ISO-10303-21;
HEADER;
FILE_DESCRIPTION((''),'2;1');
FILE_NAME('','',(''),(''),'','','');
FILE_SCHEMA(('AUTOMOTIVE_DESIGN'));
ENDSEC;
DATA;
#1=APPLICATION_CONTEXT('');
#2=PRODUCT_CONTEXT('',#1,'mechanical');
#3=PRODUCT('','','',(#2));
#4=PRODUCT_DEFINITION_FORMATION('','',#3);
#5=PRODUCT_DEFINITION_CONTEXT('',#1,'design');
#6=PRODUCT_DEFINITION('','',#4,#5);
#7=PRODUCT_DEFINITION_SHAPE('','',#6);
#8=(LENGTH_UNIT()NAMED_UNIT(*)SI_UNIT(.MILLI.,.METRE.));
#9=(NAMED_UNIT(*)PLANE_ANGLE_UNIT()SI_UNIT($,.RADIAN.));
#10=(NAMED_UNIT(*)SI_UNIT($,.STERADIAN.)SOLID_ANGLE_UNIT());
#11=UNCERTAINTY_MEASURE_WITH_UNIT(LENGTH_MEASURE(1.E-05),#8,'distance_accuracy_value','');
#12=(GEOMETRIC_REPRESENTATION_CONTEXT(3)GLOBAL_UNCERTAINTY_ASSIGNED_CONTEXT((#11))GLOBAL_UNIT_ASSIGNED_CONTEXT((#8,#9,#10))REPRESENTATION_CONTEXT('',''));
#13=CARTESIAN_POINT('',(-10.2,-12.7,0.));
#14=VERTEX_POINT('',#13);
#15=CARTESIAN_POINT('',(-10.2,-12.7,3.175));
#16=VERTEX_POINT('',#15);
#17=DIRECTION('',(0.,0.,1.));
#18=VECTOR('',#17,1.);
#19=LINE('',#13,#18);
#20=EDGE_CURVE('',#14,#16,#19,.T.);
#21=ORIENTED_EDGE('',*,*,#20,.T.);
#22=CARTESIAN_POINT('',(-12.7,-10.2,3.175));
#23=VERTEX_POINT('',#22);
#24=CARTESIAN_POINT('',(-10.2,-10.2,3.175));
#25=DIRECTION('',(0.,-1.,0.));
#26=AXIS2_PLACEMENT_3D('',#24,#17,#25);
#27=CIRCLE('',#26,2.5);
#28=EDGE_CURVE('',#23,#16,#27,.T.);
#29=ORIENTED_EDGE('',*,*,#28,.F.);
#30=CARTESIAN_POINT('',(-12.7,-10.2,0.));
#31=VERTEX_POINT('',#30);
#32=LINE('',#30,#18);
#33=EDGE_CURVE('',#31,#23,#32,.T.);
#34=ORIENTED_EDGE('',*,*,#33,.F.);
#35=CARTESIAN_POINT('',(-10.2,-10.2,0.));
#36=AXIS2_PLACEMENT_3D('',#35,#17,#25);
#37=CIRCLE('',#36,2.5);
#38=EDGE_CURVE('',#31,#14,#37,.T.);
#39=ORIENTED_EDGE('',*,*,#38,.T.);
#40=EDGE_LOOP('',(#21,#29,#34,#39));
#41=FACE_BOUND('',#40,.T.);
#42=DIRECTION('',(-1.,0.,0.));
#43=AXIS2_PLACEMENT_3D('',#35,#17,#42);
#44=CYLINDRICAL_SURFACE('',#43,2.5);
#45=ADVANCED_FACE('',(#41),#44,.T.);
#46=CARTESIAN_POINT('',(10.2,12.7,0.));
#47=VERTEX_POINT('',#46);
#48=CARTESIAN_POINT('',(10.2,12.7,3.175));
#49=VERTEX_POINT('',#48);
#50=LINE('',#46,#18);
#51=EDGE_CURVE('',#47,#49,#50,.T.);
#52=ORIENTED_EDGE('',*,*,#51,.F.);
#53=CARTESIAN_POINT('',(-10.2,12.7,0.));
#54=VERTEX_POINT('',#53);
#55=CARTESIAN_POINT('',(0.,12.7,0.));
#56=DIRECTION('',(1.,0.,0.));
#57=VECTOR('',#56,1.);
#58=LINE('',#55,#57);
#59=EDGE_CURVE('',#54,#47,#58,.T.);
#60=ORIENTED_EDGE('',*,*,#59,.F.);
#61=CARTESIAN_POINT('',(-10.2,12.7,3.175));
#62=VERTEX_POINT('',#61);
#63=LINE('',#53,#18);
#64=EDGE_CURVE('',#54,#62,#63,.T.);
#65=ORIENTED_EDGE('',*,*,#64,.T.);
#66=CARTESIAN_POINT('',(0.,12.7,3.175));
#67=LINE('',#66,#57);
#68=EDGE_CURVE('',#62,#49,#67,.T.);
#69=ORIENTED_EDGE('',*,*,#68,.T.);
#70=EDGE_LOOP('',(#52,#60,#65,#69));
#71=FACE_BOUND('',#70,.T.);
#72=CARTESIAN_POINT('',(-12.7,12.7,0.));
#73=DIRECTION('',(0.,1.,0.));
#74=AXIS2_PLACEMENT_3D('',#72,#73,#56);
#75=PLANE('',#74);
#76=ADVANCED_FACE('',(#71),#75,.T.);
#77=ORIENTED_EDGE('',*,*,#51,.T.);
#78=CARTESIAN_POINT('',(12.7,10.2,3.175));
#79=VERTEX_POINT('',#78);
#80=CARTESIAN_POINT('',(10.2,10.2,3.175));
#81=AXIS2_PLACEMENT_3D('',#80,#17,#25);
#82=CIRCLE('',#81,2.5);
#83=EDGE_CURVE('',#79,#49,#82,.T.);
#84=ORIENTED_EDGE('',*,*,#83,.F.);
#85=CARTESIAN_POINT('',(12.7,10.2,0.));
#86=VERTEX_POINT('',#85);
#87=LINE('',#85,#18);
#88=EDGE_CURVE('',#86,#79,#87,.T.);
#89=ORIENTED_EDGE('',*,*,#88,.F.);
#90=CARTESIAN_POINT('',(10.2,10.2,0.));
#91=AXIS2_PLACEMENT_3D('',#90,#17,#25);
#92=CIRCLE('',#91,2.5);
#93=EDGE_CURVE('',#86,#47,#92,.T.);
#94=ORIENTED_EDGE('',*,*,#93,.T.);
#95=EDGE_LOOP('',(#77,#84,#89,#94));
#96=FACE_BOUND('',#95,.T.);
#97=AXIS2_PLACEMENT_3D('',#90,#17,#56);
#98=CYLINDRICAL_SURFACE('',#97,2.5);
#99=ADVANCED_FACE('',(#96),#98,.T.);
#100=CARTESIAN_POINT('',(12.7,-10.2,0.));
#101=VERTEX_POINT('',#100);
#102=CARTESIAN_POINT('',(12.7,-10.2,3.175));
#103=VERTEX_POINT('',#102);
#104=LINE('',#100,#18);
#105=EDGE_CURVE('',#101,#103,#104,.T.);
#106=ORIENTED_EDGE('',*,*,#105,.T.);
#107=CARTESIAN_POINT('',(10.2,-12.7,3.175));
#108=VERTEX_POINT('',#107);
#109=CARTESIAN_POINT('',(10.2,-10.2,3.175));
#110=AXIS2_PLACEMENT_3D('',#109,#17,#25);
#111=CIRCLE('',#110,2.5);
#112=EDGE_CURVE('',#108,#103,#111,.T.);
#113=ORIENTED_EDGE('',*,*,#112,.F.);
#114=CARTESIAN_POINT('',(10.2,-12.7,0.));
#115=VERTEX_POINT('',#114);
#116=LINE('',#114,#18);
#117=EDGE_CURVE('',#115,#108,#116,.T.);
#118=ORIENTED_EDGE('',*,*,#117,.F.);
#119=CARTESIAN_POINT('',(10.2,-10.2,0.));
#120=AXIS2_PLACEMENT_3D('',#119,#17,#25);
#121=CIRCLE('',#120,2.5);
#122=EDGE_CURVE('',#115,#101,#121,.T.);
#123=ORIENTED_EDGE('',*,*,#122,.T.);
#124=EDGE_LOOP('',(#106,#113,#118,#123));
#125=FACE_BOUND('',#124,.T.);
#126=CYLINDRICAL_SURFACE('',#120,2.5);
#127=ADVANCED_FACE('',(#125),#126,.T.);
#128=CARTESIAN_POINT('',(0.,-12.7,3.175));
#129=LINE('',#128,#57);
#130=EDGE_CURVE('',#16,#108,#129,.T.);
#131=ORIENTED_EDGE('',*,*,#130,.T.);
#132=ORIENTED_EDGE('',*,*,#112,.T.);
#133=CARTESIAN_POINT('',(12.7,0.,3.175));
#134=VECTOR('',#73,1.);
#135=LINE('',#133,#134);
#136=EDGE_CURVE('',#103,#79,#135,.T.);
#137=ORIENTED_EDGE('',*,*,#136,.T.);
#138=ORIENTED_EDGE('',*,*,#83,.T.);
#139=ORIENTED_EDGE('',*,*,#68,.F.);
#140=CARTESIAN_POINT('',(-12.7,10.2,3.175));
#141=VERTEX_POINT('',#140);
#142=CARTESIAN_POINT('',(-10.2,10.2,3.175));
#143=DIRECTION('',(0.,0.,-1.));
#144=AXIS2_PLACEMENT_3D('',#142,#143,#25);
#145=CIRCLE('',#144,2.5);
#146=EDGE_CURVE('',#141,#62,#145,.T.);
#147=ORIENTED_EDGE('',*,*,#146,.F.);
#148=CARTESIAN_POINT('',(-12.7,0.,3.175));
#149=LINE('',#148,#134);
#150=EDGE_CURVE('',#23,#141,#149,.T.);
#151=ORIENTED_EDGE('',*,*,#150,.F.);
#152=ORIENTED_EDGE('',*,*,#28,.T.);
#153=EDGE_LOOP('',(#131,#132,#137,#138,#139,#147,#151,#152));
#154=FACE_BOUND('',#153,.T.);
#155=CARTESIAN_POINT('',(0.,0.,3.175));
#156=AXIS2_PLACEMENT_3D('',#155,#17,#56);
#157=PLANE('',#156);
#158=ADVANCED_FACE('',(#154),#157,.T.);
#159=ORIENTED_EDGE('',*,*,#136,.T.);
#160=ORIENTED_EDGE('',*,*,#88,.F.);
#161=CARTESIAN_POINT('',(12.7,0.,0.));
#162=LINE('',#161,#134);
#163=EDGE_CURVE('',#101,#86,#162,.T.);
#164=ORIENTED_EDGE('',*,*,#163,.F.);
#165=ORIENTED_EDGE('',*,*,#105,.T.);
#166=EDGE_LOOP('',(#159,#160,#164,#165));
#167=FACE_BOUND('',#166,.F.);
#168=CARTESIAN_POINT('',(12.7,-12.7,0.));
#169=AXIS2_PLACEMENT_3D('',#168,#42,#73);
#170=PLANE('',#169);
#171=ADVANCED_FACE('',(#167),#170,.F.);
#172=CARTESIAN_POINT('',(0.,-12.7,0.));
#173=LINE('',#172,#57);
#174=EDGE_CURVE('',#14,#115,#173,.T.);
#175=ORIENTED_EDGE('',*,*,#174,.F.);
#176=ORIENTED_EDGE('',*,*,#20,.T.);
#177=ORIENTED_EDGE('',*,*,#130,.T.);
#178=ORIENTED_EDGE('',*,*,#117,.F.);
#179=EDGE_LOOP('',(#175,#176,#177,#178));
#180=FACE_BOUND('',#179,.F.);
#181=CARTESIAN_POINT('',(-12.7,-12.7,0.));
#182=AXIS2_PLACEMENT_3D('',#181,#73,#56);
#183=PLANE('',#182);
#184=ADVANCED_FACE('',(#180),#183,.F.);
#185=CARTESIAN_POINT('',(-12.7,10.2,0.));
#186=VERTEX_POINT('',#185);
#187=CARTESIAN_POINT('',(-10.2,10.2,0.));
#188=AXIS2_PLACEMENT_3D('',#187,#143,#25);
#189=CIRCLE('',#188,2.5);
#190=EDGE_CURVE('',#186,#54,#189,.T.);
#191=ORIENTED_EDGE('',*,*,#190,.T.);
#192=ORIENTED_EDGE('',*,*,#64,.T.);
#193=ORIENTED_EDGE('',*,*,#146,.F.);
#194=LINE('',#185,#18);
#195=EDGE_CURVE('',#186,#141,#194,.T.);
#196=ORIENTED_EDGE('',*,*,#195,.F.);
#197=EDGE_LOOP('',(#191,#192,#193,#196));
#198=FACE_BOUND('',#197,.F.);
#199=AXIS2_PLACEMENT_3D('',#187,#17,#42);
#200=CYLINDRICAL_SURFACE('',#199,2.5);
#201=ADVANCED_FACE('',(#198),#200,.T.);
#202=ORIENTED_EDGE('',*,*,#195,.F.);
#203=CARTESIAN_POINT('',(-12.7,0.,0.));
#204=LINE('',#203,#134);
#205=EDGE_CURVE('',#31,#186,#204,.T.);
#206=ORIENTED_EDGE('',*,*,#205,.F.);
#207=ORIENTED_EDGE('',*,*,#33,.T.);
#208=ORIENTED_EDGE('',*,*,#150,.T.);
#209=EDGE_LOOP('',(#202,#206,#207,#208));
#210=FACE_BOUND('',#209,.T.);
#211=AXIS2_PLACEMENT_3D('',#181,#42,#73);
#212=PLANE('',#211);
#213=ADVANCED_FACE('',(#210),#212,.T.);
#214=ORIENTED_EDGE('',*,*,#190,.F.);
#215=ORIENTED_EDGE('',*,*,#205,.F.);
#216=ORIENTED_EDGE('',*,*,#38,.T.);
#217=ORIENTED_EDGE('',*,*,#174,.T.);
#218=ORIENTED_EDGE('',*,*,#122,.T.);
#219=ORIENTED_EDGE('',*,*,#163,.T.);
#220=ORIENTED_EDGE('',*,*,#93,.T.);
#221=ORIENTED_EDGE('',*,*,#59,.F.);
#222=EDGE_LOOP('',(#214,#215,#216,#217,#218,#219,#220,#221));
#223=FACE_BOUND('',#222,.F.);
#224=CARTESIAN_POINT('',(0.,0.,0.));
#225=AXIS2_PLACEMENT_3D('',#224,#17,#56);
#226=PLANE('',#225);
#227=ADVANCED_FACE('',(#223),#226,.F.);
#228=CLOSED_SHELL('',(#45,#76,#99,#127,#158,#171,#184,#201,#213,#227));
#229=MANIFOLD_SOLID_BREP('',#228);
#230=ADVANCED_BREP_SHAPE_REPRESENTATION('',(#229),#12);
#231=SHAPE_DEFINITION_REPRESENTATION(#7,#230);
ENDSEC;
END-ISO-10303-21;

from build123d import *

# Parameters (mm, degrees)
F0_W     = 25.4
F0_H     = 25.4
F1_DEPTH = 3.175
F2_R     = 2.5


# Not quite as in the source:
# - a length typed as a fraction of an inch, garbled in the dataset ("3 / 203.2 mm" for 3/8 in), is restored


with BuildPart() as f1:
    # F0 (on Top) → F1 (new body)
    with BuildSketch(Plane.XY):
        Rectangle(F0_W, F0_H)
    extrude(amount=F1_DEPTH)

    # F2
    f2_edges = [f1.edges().sort_by_distance(p)[0] for p in [
        (12.7, -12.7, 1.5875),
        (-12.7, -12.7, 1.5875),
        (12.7, 12.7, 1.5875),
        (-12.7, 12.7, 1.5875),
    ]]
    fillet(f2_edges, radius=F2_R)


solid = f1.part
